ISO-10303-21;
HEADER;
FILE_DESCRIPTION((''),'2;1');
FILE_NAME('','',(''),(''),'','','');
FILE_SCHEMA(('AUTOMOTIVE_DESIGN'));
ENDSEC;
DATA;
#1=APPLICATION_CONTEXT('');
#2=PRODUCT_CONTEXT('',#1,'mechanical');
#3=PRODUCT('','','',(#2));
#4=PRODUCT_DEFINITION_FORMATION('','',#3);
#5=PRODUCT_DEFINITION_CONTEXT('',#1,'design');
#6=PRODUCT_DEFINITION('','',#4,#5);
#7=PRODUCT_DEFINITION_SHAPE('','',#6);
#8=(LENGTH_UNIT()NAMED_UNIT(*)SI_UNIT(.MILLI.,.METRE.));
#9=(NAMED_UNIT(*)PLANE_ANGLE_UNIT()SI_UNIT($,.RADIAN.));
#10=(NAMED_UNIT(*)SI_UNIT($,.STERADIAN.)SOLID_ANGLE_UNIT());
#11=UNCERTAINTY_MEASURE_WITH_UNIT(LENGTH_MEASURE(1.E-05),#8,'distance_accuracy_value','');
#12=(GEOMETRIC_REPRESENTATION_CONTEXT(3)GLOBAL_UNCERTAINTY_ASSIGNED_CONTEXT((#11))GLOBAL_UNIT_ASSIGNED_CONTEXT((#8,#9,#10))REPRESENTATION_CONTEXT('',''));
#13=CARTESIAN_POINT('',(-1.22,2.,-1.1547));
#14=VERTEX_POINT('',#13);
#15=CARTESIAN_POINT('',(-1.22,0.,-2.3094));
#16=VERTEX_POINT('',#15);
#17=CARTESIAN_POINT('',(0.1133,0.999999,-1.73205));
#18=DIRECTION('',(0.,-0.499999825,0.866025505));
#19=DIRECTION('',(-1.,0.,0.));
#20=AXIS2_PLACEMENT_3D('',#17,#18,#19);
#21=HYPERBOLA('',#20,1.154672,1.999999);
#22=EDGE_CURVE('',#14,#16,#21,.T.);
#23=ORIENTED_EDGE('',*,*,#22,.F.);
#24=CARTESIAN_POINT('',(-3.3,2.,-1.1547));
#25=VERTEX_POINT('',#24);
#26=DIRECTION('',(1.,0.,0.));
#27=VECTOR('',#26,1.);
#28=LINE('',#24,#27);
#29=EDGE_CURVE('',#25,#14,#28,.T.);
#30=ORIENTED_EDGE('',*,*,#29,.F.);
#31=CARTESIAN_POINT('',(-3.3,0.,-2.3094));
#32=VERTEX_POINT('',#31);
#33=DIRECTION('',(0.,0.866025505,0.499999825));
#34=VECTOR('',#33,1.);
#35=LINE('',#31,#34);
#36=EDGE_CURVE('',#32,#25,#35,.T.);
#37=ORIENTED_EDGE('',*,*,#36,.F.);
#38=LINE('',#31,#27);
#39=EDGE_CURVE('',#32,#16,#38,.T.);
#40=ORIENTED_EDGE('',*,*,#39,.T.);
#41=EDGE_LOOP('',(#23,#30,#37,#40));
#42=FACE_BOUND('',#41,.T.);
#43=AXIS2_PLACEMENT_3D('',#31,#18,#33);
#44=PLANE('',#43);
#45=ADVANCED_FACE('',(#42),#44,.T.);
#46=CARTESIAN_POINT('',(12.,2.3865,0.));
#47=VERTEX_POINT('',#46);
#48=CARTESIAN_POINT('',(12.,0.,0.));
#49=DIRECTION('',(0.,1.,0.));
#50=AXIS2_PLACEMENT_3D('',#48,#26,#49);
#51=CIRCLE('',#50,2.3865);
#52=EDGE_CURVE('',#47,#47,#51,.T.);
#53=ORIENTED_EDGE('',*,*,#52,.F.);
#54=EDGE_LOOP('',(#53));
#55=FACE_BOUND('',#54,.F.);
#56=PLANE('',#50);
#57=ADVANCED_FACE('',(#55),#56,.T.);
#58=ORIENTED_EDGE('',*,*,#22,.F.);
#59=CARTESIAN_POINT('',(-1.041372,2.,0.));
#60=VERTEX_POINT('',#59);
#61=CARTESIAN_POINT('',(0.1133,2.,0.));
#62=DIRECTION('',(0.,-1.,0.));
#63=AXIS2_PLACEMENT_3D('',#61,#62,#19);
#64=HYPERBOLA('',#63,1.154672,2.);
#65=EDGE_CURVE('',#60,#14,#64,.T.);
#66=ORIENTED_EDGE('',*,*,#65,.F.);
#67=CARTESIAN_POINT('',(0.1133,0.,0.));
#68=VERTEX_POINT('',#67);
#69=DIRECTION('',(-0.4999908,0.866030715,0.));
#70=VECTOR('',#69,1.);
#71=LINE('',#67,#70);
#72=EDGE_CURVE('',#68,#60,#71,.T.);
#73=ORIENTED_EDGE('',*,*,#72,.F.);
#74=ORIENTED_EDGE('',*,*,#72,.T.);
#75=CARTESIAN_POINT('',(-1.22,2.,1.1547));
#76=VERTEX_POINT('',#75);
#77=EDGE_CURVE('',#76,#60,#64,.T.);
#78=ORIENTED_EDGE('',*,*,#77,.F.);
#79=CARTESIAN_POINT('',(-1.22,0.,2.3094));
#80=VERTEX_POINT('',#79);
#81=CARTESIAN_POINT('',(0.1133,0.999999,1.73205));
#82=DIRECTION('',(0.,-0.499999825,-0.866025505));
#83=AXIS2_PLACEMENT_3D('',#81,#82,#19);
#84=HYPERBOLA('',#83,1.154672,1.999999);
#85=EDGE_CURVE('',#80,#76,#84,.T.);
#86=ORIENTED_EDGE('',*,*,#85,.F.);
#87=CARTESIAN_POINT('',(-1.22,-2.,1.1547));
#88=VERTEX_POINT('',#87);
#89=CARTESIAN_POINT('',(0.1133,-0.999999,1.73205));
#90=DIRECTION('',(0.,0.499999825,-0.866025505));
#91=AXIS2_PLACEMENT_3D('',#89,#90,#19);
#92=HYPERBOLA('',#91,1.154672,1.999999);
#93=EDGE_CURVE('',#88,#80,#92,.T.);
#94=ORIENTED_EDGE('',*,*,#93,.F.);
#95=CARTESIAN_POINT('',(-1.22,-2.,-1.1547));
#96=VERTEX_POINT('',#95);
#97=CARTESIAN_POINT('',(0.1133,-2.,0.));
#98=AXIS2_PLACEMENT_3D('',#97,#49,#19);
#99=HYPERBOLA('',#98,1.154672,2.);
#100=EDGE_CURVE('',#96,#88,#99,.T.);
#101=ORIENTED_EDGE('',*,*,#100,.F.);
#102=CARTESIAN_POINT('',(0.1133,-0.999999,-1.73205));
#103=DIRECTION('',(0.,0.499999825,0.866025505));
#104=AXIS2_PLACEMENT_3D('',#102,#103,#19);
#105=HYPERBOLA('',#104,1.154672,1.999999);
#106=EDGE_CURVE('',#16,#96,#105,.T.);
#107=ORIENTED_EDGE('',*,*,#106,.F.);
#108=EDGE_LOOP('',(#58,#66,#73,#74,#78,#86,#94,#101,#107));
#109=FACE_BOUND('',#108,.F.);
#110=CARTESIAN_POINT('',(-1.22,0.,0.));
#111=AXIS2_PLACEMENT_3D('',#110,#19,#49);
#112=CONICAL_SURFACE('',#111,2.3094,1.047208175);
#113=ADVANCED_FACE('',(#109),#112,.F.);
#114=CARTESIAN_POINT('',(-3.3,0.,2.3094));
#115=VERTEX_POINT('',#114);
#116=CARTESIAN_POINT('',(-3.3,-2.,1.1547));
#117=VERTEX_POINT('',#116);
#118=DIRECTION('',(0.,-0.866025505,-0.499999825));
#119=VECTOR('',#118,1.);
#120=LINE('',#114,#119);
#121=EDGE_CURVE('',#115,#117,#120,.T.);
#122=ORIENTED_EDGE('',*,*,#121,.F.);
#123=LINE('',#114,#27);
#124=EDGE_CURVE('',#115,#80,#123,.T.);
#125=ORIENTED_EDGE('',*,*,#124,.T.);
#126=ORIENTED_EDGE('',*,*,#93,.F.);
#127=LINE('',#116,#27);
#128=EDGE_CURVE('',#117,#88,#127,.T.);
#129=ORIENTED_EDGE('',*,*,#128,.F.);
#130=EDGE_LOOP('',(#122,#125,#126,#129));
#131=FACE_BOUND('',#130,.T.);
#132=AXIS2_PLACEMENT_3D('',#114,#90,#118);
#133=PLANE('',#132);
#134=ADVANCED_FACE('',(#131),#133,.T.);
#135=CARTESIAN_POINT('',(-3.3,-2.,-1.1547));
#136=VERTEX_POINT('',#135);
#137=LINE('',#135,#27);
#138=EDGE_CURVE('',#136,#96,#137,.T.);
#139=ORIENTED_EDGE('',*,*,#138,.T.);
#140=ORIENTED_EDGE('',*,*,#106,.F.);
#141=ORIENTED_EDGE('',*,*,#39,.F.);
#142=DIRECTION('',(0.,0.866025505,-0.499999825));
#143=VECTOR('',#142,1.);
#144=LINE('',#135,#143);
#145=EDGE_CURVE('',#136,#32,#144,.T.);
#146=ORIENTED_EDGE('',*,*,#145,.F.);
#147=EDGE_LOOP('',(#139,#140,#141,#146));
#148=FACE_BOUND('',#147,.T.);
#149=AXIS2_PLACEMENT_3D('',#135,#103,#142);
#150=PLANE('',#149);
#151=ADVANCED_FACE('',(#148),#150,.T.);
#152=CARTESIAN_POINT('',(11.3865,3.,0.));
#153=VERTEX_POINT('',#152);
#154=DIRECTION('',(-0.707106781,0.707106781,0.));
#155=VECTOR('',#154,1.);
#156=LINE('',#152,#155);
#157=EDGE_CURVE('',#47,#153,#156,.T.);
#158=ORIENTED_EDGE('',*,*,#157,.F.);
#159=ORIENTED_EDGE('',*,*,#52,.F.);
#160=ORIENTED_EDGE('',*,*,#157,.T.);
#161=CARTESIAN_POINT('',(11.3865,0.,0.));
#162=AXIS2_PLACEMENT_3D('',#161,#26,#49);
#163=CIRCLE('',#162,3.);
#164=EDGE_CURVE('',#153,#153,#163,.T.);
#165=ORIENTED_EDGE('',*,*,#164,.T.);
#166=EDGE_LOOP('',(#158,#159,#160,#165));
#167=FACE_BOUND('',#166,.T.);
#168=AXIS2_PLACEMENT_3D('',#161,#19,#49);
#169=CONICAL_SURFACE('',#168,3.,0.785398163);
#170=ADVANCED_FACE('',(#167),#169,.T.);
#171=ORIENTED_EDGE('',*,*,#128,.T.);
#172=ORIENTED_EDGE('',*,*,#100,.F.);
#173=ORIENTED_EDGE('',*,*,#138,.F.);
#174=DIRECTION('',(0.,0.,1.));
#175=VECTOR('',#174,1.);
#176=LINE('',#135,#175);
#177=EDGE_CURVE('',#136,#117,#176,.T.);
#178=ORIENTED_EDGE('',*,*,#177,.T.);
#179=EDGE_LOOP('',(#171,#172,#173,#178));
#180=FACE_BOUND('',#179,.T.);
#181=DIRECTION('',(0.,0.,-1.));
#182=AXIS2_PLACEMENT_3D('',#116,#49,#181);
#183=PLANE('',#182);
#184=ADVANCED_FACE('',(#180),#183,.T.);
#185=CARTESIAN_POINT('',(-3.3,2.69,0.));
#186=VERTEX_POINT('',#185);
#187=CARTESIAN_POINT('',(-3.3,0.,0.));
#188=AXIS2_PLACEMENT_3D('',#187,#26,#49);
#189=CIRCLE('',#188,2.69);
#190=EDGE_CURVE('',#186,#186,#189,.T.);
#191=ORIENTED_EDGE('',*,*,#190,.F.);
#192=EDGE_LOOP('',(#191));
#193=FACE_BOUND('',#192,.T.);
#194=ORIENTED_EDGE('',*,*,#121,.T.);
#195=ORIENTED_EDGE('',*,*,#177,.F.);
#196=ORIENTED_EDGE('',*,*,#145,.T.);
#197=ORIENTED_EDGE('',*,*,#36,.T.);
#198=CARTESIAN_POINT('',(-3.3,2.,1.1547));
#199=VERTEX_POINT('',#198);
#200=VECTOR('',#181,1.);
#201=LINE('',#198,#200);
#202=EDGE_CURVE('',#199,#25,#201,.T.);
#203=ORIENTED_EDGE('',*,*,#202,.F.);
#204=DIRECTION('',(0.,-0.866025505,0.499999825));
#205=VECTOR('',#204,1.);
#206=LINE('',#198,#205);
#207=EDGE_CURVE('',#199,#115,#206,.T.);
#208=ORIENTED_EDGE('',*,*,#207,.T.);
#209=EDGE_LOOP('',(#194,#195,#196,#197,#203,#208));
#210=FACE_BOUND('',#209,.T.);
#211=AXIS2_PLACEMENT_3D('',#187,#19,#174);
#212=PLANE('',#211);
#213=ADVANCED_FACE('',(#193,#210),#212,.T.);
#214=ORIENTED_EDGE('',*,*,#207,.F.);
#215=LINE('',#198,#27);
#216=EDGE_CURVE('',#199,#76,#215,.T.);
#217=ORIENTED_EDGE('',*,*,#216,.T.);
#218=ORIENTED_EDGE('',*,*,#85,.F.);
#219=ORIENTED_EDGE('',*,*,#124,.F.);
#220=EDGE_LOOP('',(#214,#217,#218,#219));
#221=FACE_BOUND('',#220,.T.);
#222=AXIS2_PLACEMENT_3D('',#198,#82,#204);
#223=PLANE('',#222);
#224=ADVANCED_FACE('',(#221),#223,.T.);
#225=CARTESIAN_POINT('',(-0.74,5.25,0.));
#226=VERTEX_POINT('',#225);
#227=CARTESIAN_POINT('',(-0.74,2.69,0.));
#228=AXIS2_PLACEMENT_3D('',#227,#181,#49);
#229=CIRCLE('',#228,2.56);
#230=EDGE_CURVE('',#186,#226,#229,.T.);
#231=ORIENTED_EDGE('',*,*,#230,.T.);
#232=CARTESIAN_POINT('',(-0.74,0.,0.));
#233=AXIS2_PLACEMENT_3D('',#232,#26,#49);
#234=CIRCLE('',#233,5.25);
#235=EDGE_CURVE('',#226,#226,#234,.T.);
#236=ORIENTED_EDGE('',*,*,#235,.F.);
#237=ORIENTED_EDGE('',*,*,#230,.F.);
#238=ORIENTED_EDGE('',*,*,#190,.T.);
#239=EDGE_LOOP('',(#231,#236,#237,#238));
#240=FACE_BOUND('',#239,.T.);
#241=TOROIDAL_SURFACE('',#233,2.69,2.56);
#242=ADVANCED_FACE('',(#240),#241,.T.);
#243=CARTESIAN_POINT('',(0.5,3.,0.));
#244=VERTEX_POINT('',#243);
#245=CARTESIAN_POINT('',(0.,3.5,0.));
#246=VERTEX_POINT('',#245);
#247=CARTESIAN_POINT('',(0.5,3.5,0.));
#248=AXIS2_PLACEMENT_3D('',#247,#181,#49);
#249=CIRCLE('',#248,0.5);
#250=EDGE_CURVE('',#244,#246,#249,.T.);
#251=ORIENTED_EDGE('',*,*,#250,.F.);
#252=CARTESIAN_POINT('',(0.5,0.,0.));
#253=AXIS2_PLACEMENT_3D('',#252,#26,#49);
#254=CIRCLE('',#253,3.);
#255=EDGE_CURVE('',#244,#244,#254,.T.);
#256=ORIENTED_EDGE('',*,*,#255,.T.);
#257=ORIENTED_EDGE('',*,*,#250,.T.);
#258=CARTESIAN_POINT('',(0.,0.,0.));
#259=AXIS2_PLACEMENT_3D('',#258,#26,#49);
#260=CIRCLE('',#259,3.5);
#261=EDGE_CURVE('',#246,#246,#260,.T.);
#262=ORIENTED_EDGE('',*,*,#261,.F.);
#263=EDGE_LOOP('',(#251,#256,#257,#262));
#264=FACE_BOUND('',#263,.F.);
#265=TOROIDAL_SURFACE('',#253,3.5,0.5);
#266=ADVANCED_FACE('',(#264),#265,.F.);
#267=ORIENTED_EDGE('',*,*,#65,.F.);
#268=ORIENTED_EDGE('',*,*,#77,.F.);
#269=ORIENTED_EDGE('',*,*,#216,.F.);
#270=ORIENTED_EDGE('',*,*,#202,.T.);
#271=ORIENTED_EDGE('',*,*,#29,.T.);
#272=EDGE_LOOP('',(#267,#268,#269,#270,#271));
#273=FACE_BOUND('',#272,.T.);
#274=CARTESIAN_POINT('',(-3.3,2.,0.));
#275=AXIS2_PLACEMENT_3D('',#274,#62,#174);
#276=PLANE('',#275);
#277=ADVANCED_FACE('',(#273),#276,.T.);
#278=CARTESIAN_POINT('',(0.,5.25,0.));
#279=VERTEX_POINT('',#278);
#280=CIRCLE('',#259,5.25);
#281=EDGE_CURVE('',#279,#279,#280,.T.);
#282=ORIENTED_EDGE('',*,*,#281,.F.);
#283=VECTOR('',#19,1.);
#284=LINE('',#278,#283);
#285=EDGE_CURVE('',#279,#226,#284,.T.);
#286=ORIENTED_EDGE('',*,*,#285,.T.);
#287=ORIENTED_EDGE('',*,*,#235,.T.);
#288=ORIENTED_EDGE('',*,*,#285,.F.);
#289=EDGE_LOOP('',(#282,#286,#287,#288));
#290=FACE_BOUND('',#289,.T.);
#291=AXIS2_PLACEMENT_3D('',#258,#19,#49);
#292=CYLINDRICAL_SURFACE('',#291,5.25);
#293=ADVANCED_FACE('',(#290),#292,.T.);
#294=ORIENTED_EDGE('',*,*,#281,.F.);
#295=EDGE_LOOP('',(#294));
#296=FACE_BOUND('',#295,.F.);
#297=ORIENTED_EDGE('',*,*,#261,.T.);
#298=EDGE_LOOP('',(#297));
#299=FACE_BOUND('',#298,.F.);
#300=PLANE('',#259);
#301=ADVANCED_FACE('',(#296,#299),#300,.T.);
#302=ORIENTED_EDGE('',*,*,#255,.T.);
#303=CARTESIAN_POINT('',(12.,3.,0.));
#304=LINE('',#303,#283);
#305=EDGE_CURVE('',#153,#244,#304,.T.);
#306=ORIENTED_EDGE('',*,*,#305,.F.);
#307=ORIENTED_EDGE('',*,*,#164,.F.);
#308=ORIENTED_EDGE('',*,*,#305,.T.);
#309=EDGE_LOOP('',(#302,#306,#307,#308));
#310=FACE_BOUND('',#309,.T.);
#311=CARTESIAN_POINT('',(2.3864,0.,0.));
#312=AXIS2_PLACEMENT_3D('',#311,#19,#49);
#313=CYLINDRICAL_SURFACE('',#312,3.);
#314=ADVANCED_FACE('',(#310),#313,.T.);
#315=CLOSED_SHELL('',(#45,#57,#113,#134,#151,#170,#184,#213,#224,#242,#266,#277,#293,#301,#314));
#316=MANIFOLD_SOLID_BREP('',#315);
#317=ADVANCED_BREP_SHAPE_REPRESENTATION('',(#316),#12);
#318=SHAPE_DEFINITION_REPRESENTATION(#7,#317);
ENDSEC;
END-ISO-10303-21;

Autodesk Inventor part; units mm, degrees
ref_plane "YZ Plane" through (0, 0, 0) normal (1, 0, 0) x (0, 1, 0)
ref_plane "XZ Plane" through (0, 0, 0) normal (0, 1, 0) x (-1, 0, 0)
sketch "Sketch1" plane through (0, 0, 0) normal (0, 0, 1) x (1, 0, 0)
  line L0 (0.1133, 0) -> (12, 0)
  line L1 (12, 0) -> (12, 3)
  line L2 (12, 3) -> (3, 3)
  line L3 (3, 3) -> (2.3864, 3)
  line L4 (2.3864, 3) -> (0, 3)
  line L5 (0, 3) -> (0, 5.25)
  line L6 (0, 5.25) -> (-3.3, 5.25)
  line L7 (-3.3, 5.25) -> (-3.3, 2.3094)
  line L8 (-3.3, 2.3094) -> (-1.22, 2.3094)
  line L9 (-1.22, 2.3094) -> (0.1133, 0)
  line L10 (-6.36, 0) -> (15.06, 0) projected
  line L11 (0, -1.05) -> (0, 6.3) projected
  line L12 (3, 3) -> (0, 3) construction
  dimension "d1" = 9
  dimension "d2" = 0.6136
  dimension "d3" = 3.3
  dimension "d4" = 2.08
  dimension "d5" = 60
  dimension "d6" = 6
  dimension "d7" = 6
  dimension "d8" = 4.6188
  dimension "d9" = 10.5
  dimension "d26" = 12
revolve "Body" add sketch "Sketch1" angle 360 about axis through (0.1133, 0, 0) along (1, 0, 0) contours L9 L11 L4 L3 L2 L1 L0 | L9 L8 L7 L6 L5 L11
sketch "Sketch2" plane through (-3.3, 0, 0) normal (-1, 0, 0) x (0, 0, 1)
  circle A0 centre (0, 0) radius 2.3094 projected
  line L0 (0, -7.35) -> (0, 7.35) projected
  line L1 (-7.35, 0) -> (7.35, 0) projected
  line L2 (2.3094, 0) -> (1.1547, -2)
  line L3 (1.1547, -2) -> (-1.1547, -2)
  line L4 (-1.1547, -2) -> (-2.3094, 0)
  line L5 (-2.3094, 0) -> (-1.1547, 2)
  line L6 (-1.1547, 2) -> (1.1547, 2)
  line L7 (1.1547, 2) -> (2.3094, 0)
extrude "Slot" add sketch "Sketch2" against normal up to next contours L7 A0 | A0 L2 | L6 L0 A0 | A0 L0 L3 | L0 L6 A0 | A0 L3 L0 | L4 A0 | A0 L5
fillet "Fillet1" radius 2.56 1 edges at (-3.3, -5.25, 0)
thread "Thread" size "M6x1" class "6g" standard "ISO Metric profile" length 9
chamfer "Chamfer1" distance 0.6135 distance2 0.6135 1 edges at (12, -3, 0) measured on face at (12, 0.705, 0.3049)
ref_plane "Work Plane1" through (29, 0, 0) normal (0, -1, 0) x (1, 0, 0)
fillet "Fillet2" radius 0.5 1 edges at (0, -3, 0)
equation "\"d30\" = R"
equation "\"d17\" = RR"
equation "\"d13\" = GEL"
equation "\"d15\" = -0.5 * SPD + 0.5 * GD"
equation "\"d16\" = GUL"
equation "\"d1\" = GEL"
equation "\"d3\" = KOH"
equation "\"d4\" = INTI"
equation "\"d6\" = GD"
equation "\"d7\" = BDM"
equation "\"d8\" = 1.1547 * SW"
equation "\"d9\" = KOD"
equation "\"d26\" = NLG"
equation "\"GD\" = NND"
equation "\"NLG\" = 12"
equation "\"GEL\" = 9"
equation "\"KOD\" = 10.5"
equation "\"KOH\" = 3.3"
equation "\"INTI\" = 2.08"
equation "\"GAL\" = 0.61345 * PTC"
equation "\"GUL\" = 0.61345 * PTC"
equation "\"BDM\" = NND"
equation "\"SW\" = 4"
equation "\"RR\" = 2.56"
equation "\"SPD\" = NND - 1.2269 * PTC"
equation "\"R\" = 0.5"
equation "\"TOA\" = 30deg"
equation "\"GD1\" = THREADDIA - 1.2269 * PTC"
equation "\"THREADDIA\" = 6"
equation "\"PTC\" = 1"
equation "\"NND\" = 6"
equation "\"KOH1\" = 0.74"
equation "\"E0\" = 4.583"
properties part number "ISO 7380-1 - M6 x 12" material "Steel"
